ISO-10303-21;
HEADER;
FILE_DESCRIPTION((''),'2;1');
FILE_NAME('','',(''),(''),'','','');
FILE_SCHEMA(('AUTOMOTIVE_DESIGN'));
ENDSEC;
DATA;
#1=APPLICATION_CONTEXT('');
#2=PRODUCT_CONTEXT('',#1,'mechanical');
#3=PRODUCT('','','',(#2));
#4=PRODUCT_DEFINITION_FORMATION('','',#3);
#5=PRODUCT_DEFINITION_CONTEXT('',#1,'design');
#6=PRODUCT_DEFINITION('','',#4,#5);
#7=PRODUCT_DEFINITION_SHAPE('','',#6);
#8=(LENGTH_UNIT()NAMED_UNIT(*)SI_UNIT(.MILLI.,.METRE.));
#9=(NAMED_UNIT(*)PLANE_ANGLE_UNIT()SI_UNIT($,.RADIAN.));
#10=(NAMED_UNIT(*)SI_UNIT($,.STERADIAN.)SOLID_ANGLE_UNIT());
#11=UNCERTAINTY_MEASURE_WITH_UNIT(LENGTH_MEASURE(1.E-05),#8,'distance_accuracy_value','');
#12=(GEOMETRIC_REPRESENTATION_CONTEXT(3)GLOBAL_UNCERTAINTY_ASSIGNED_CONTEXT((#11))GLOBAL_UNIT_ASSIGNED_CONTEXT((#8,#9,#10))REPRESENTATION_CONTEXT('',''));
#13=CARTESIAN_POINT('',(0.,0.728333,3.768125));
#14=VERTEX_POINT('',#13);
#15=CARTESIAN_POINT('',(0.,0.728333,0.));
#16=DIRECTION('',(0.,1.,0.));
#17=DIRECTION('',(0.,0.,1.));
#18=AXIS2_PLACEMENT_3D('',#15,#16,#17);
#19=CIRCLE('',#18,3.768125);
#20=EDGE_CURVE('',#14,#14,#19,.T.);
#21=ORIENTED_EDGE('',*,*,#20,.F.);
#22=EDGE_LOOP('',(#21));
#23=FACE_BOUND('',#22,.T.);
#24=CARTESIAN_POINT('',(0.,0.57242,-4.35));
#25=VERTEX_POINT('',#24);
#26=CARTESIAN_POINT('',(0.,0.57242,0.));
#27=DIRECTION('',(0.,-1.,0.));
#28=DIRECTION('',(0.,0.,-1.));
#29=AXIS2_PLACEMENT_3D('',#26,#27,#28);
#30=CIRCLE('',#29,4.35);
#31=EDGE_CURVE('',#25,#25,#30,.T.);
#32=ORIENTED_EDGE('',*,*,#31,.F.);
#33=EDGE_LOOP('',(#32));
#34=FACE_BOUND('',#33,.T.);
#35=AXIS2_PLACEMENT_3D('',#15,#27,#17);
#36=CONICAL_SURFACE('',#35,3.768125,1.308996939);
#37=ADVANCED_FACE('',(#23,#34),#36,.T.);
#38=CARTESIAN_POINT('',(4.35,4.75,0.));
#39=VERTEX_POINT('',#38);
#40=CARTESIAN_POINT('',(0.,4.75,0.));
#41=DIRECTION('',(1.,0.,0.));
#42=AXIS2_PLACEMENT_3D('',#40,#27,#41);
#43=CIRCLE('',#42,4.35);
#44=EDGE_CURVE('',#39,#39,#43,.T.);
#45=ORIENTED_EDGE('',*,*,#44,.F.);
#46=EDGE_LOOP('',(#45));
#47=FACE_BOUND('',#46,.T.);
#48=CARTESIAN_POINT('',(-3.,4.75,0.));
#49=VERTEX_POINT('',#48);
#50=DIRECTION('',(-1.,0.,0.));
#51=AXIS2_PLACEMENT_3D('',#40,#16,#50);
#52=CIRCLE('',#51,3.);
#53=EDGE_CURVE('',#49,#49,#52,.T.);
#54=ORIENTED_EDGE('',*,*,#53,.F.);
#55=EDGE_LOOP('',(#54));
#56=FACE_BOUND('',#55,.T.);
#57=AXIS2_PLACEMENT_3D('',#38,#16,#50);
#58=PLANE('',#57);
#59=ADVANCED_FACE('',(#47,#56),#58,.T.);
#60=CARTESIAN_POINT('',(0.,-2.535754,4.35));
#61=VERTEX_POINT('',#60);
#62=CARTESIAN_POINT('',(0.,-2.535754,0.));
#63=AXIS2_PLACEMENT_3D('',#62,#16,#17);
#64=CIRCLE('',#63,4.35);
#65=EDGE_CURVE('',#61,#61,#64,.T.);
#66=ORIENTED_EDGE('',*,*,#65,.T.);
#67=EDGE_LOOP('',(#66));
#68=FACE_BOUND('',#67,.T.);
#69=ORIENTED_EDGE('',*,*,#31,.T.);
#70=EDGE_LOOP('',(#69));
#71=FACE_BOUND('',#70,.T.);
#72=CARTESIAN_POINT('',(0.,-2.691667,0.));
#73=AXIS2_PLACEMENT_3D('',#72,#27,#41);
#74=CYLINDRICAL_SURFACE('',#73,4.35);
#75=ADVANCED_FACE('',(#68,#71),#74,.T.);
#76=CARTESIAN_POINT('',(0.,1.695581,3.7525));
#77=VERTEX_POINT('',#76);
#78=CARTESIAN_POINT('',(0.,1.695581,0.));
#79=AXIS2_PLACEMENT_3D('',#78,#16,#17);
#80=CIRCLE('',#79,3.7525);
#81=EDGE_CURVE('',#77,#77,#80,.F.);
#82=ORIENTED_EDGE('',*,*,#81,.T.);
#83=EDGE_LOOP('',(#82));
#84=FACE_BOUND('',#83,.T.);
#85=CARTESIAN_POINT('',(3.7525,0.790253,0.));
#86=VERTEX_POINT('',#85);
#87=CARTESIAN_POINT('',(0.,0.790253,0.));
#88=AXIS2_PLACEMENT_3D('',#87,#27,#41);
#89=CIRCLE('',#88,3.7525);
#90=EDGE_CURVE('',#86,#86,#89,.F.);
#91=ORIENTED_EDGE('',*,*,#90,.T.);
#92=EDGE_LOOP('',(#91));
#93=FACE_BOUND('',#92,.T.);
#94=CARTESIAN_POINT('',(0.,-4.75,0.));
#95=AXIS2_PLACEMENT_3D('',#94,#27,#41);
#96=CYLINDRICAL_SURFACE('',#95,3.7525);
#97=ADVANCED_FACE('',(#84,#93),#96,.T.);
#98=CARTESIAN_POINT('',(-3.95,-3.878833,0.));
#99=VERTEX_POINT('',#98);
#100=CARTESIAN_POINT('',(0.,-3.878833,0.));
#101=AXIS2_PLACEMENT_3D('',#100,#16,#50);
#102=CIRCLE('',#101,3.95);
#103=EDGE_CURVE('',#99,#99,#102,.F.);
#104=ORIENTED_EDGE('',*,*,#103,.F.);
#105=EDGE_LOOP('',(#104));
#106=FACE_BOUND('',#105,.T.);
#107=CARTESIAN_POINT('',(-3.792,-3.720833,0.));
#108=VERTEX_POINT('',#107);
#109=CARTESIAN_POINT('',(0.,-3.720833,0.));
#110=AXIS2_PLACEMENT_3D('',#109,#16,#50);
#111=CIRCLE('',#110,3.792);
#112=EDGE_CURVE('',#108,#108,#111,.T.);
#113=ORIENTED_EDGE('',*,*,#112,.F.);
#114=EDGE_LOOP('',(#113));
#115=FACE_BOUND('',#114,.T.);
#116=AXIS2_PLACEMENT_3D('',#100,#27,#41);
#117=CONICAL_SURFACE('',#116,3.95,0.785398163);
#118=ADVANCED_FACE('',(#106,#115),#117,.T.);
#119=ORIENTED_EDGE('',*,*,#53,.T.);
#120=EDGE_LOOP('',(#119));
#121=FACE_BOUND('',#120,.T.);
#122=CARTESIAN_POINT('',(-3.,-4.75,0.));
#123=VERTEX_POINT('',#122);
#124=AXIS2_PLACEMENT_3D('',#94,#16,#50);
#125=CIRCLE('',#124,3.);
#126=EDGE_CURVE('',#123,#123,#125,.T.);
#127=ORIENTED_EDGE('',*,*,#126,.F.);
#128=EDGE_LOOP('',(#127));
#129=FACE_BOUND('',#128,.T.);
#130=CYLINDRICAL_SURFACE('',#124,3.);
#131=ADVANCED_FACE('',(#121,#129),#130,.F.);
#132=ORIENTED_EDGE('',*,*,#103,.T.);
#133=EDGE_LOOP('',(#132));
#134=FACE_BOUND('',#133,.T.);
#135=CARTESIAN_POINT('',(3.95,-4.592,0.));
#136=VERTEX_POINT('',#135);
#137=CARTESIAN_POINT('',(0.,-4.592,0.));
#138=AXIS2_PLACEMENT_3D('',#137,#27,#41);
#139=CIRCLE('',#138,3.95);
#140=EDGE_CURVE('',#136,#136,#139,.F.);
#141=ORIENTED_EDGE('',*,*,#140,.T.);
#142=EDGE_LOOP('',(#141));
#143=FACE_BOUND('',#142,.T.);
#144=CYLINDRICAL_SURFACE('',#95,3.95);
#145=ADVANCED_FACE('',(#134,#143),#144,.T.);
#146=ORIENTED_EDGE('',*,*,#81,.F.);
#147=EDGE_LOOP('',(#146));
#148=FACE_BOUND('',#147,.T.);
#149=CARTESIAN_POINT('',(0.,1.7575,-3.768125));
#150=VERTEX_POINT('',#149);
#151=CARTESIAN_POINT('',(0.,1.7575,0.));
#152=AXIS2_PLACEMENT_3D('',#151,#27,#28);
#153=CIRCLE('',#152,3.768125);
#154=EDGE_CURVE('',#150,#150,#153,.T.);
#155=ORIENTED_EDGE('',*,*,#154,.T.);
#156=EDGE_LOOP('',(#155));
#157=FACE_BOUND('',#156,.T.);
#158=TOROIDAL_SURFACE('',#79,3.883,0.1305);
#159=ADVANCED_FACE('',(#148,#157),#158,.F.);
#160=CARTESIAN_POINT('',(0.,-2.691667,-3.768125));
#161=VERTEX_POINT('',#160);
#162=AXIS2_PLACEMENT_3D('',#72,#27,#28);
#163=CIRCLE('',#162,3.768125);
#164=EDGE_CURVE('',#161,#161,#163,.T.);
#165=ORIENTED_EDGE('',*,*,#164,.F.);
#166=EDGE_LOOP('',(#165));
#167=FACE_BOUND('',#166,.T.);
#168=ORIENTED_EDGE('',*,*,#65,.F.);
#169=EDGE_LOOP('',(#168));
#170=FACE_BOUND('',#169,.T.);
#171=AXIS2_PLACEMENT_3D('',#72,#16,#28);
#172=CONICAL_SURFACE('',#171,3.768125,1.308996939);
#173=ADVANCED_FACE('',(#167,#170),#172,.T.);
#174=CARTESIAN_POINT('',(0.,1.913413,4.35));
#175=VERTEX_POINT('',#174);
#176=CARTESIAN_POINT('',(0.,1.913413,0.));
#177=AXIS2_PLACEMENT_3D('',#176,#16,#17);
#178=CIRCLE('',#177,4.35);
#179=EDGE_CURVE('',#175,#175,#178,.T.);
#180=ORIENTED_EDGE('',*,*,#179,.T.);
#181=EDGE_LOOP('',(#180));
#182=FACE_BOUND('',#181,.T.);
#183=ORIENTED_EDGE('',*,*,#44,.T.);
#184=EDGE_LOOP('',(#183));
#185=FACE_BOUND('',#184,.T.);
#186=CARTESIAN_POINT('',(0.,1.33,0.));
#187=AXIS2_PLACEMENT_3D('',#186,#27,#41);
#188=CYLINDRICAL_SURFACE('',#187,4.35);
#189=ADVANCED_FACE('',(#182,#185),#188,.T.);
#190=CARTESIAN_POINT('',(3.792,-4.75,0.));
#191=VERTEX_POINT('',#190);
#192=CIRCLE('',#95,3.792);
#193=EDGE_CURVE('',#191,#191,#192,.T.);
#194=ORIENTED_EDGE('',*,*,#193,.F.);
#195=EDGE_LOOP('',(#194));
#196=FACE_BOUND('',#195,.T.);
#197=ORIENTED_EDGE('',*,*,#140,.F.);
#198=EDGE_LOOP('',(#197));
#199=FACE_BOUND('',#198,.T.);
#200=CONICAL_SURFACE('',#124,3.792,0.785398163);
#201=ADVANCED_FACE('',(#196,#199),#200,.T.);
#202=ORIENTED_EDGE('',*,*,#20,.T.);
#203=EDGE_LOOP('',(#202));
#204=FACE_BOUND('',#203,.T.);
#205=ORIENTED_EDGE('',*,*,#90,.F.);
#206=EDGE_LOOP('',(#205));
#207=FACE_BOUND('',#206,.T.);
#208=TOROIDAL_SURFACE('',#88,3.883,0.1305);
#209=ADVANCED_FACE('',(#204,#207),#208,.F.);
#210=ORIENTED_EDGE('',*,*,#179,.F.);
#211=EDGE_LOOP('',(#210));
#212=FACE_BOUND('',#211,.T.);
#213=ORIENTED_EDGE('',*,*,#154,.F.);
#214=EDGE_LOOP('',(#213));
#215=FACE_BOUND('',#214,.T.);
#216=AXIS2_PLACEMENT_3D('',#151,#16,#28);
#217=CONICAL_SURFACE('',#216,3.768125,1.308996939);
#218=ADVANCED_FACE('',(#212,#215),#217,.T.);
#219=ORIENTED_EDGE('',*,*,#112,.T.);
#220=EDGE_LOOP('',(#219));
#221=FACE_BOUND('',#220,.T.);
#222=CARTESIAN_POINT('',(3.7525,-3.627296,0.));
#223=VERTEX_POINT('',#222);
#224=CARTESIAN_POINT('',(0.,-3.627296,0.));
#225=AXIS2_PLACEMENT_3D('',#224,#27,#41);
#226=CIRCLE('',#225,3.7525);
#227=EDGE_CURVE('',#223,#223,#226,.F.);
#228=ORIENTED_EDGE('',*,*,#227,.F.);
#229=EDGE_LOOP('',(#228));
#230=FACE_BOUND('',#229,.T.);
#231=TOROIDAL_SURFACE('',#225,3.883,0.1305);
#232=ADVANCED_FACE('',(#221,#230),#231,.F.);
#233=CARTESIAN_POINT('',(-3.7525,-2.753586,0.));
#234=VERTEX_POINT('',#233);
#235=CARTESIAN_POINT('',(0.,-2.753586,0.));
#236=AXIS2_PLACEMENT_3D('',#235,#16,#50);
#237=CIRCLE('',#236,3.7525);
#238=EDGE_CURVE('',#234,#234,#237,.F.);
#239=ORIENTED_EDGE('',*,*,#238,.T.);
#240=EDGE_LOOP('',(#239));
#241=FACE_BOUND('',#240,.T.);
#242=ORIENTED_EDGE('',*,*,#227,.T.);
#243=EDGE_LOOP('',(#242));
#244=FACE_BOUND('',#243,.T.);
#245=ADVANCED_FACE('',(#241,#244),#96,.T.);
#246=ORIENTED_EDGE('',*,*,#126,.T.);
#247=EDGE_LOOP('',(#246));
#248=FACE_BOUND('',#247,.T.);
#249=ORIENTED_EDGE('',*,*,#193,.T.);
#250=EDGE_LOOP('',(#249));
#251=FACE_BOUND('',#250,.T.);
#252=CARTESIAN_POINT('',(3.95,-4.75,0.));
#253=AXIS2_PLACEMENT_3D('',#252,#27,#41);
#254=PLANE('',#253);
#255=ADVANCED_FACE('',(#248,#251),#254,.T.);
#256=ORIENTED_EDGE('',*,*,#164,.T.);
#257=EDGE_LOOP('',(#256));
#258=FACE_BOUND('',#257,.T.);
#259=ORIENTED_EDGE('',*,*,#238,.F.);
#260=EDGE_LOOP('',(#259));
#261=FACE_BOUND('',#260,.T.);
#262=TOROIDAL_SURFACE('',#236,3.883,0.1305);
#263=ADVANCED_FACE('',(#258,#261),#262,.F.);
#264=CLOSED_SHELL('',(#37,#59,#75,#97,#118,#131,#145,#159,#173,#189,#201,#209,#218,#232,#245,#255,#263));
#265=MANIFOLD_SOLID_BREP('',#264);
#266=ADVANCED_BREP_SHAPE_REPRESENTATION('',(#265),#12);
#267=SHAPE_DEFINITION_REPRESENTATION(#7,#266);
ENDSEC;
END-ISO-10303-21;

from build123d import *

# Parameters (mm, degrees)
SKETCH3_W                 = 4.35
SKETCH3_H                 = 3.42
SKETCH_PATTERN1_START     = -2.691666667
SKETCH_PATTERN1_OUTLINE_R = 4.35
SKETCH_PATTERN1_DEPTH     = 3.42
SKETCH14_R                = 4.35
CUT_EXTRUDE5_DEPTH        = 0.4275
SKETCH17_OUTSIDE_W        = 88.114
SKETCH17_OUTSIDE_H        = 88.114
SKETCH17_OUTSIDE_R        = 3.768125
CUT_EXTRUDE8_DEPTH        = 9.955029662
CUT_EXTRUDE8_DRAFT        = -75
SKETCH18_OUTSIDE_W        = 82.758
SKETCH18_OUTSIDE_H        = 82.758
SKETCH18_OUTSIDE_R        = 3.768125
CUT_EXTRUDE9_DEPTH        = 9.237544301
CUT_EXTRUDE9_DRAFT        = -75
SKETCH19_OUTSIDE_W        = 93.34
SKETCH19_OUTSIDE_H        = 93.34
SKETCH19_OUTSIDE_R        = 3.768125
CUT_EXTRUDE10_DEPTH       = 10.655226708
CUT_EXTRUDE10_DRAFT       = -75
SKETCH7_R                 = 3
CUT_EXTRUDE1_DEPTH        = 12.317906167
CHAMFER1_SIZE             = 0.158
FILLET2_R                 = 0.1305


# Read off the part's stored shape, not the designer's step: Sketch-Pattern1
with BuildPart() as part:
    # Sketch3 → Revolve1 (revolve)
    with BuildSketch(Plane.XY):
        with Locations((2.175, 3.04)):
            Rectangle(SKETCH3_W, SKETCH3_H)
    revolve(axis=Axis((0, 1.33, 0), (0, 1, 0)))

    # Sketch14 → Cut-Extrude5 (cut)
    with BuildSketch(Plane.XZ.offset(-1.33)):
        Circle(SKETCH14_R)
    extrude(amount=-CUT_EXTRUDE5_DEPTH, mode=Mode.SUBTRACT)


with BuildPart() as body_2:
    # Sketch6 → Revolve2 (revolve)
    with BuildSketch(Plane.XY):
        Polygon((3.7525, 0.728333333), (3.7525, -2.691666667), (3.7525, -3.720833333), (3.95, -3.720833333), (3.95, -4.75), (0, -4.75), (0, 1.7575), (3.7525, 1.7575), align=None)
    revolve(axis=Axis((0, -4.75, 0), (0, 1, 0)))


with BuildPart() as body_3:
    # Sketch-Pattern1 outline → Sketch-Pattern1 (new body)
    with BuildSketch(Plane(origin=(0, 0, 0), x_dir=(1, 0, 0), z_dir=(0, 1, 0)).offset(SKETCH_PATTERN1_START)):
        Circle(SKETCH_PATTERN1_OUTLINE_R)
    extrude(amount=SKETCH_PATTERN1_DEPTH)


with BuildPart() as body_4:
    # Mirror3: mirrored copy
    add(body_3.part.mirror(Plane.XY))


with BuildPart() as cut_extrude8_tool:
    # Sketch17 outside → Cut-Extrude8 (with draft: the straight prism first)
    with BuildSketch(Plane.XZ.offset(-1.7575)):
        Rectangle(SKETCH17_OUTSIDE_W, SKETCH17_OUTSIDE_H)
        Circle(SKETCH17_OUTSIDE_R, mode=Mode.SUBTRACT)
    extrude(amount=-CUT_EXTRUDE8_DEPTH)
    # Cut-Extrude8: the draft: its side faces are tilted about the plane it starts from
    cut_extrude8_sides = [cut_extrude8_tool.faces().sort_by_distance(p)[0] for p in [
        (0, 6.735014831, -44.057),
        (44.057, 6.735014831, 0),
        (0, 6.735014831, 44.057),
        (-44.057, 6.735014831, 0),
        (-3.768125, 6.735014831, 0),
    ]]
    draft(cut_extrude8_sides, Plane.XZ.offset(-1.7575), CUT_EXTRUDE8_DRAFT)


with BuildPart() as part_1:
    add(part.part)

    # Cut-Extrude8: cut by cut_extrude8_tool
    add(cut_extrude8_tool.part, mode=Mode.SUBTRACT)


with BuildPart() as cut_extrude9_tool:
    # Sketch18 outside → Cut-Extrude9 (with draft: the straight prism first)
    with BuildSketch(Plane(origin=(0, 0.728333333, 0), x_dir=(1, 0, 0), z_dir=(0, 1, 0))):
        Rectangle(SKETCH18_OUTSIDE_W, SKETCH18_OUTSIDE_H)
        Circle(SKETCH18_OUTSIDE_R, mode=Mode.SUBTRACT)
    extrude(amount=-CUT_EXTRUDE9_DEPTH)
    # Cut-Extrude9: the draft: its side faces are tilted about the plane it starts from
    cut_extrude9_sides = [cut_extrude9_tool.faces().sort_by_distance(p)[0] for p in [
        (0, -3.890438817, 41.379),
        (41.379, -3.890438817, 0),
        (0, -3.890438817, -41.379),
        (-41.379, -3.890438817, 0),
        (-3.768125, -3.890438817, 0),
    ]]
    draft(cut_extrude9_sides, Plane(origin=(0, 0.728333333, 0), x_dir=(1, 0, 0), z_dir=(0, 1, 0)), CUT_EXTRUDE9_DRAFT)


with BuildPart() as body_4_1:
    add(body_4.part)

    # Cut-Extrude9: cut by cut_extrude9_tool
    add(cut_extrude9_tool.part, mode=Mode.SUBTRACT)


with BuildPart() as cut_extrude10_tool:
    # Sketch19 outside → Cut-Extrude10 (with draft: the straight prism first)
    with BuildSketch(Plane.XZ.offset(2.691666667)):
        Rectangle(SKETCH19_OUTSIDE_W, SKETCH19_OUTSIDE_H)
        Circle(SKETCH19_OUTSIDE_R, mode=Mode.SUBTRACT)
    extrude(amount=-CUT_EXTRUDE10_DEPTH)
    # Cut-Extrude10: the draft: its side faces are tilted about the plane it starts from
    cut_extrude10_sides = [cut_extrude10_tool.faces().sort_by_distance(p)[0] for p in [
        (0, 2.635946687, -46.67),
        (46.67, 2.635946687, 0),
        (0, 2.635946687, 46.67),
        (-46.67, 2.635946687, 0),
        (-3.768125, 2.635946687, 0),
    ]]
    draft(cut_extrude10_sides, Plane.XZ.offset(2.691666667), CUT_EXTRUDE10_DRAFT)


with BuildPart() as body_4_2:
    add(body_4_1.part)

    # Cut-Extrude10: cut by cut_extrude10_tool
    add(cut_extrude10_tool.part, mode=Mode.SUBTRACT)


with BuildPart() as cut_extrude1_tool:
    # Sketch7 → Cut-Extrude1 (new, through all)
    with BuildSketch(Plane(origin=(0, 4.75, 0), x_dir=(1, 0, 0), z_dir=(0, 1, 0))):
        with Locations(Location((0, 0, 0), (0, 0, 180))):
            Circle(SKETCH7_R)
    extrude(amount=-CUT_EXTRUDE1_DEPTH)


with BuildPart() as part_2:
    add(part_1.part)

    # Cut-Extrude1: cut by cut_extrude1_tool
    add(cut_extrude1_tool.part, mode=Mode.SUBTRACT)


with BuildPart() as body_2_1:
    add(body_2.part)

    # Cut-Extrude1: cut by cut_extrude1_tool
    add(cut_extrude1_tool.part, mode=Mode.SUBTRACT)


with BuildPart() as body_4_3:
    add(body_4_2.part)

    # Cut-Extrude1: cut by cut_extrude1_tool
    add(cut_extrude1_tool.part, mode=Mode.SUBTRACT)


with BuildPart() as part_3:
    add(part_2.part)

    # Combine1: union body 4, body 2
    add(body_4_3.part)
    add(body_2_1.part)

    # Chamfer1
    chamfer1_edges = [part_3.edges().sort_by_distance(p)[0] for p in [
        (-3.95, -3.720833333, 0),
        (-3.95, -4.75, 0),
    ]]
    chamfer(chamfer1_edges, length=CHAMFER1_SIZE)

    # Fillet2
    # the kernel refuses this fillet: 0.1305 mm, written as the material it adds along each edge
    with BuildSketch(Plane(origin=(0, 1.7575, 0), x_dir=(1, 0, 0), z_dir=(0, 0, 1))) as fillet2_piece_1:
        with BuildLine():
            CenterArc((3.883, -0.061919176), FILLET2_R, 151.674733073, 28.325266927)
            Line((3.7525, -0.061919176), (3.74989, -0.061919176))
            Line((3.74989, -0.061919176), (3.74989, 0))
            Line((3.74989, 0), (3.7525, 0.00261))
            ThreePointArc((3.7525, 0.00261), (3.7603125, 0.00261), (3.7658275, 0.001238384))
            Line((3.7658275, 0.001238384), (3.768125, 0))
        make_face()
    revolve(axis=Axis((0, 1.7575, 0), (0, 1, 0)))
    with BuildSketch(Plane(origin=(0, -2.691666667, 0), x_dir=(1, 0, 0), z_dir=(0, 0, -1))) as fillet2_piece_2:
        with BuildLine():
            CenterArc((3.883, 0.061919176), FILLET2_R, 180, 28.325266927)
            Line((3.768125, 0), (3.7658275, -0.001238384))
            ThreePointArc((3.7658275, -0.001238384), (3.7603125, -0.00261), (3.7525, -0.00261))
            Line((3.7525, -0.00261), (3.74989, 0))
            Line((3.74989, 0), (3.74989, 0.061919176))
            Line((3.74989, 0.061919176), (3.7525, 0.061919176))
        make_face()
    revolve(axis=Axis((0, -2.691666667, 0), (0, -1, 0)))
    with BuildSketch(Plane(origin=(0, -3.720833333, 0), x_dir=(1, 0, 0), z_dir=(0, 0, 1))) as fillet2_piece_3:
        with BuildLine():
            CenterArc((3.883, 0.093537426), FILLET2_R, 180, 45.78777852)
            Line((3.7525, 0.093537426), (3.74989, 0.093537426))
            Line((3.74989, 0.093537426), (3.74989, 0))
            Line((3.74989, 0), (3.7525, -0.00261))
            ThreePointArc((3.7525, -0.00261), (3.77225, -0.00261), (3.79018, -0.001870749))
            Line((3.79018, -0.001870749), (3.792, 0))
        make_face()
    revolve(axis=Axis((0, -3.720833333, 0), (0, 1, 0)))
    with BuildSketch(Plane(origin=(0, 0.728333333, 0), x_dir=(1, 0, 0), z_dir=(0, 0, -1))) as fillet2_piece_4:
        with BuildLine():
            CenterArc((3.883, -0.061919176), FILLET2_R, 151.674733073, 28.325266927)
            Line((3.768125, 0), (3.7658275, 0.001238383))
            ThreePointArc((3.7658275, 0.001238383), (3.7603125, 0.00261), (3.7525, 0.00261))
            Line((3.7525, 0.00261), (3.74989, 0))
            Line((3.74989, 0), (3.74989, -0.061919176))
            Line((3.74989, -0.061919176), (3.7525, -0.061919176))
        make_face()
    revolve(axis=Axis((0, 0.728333333, 0), (0, -1, 0)))


solid = part_3.part
